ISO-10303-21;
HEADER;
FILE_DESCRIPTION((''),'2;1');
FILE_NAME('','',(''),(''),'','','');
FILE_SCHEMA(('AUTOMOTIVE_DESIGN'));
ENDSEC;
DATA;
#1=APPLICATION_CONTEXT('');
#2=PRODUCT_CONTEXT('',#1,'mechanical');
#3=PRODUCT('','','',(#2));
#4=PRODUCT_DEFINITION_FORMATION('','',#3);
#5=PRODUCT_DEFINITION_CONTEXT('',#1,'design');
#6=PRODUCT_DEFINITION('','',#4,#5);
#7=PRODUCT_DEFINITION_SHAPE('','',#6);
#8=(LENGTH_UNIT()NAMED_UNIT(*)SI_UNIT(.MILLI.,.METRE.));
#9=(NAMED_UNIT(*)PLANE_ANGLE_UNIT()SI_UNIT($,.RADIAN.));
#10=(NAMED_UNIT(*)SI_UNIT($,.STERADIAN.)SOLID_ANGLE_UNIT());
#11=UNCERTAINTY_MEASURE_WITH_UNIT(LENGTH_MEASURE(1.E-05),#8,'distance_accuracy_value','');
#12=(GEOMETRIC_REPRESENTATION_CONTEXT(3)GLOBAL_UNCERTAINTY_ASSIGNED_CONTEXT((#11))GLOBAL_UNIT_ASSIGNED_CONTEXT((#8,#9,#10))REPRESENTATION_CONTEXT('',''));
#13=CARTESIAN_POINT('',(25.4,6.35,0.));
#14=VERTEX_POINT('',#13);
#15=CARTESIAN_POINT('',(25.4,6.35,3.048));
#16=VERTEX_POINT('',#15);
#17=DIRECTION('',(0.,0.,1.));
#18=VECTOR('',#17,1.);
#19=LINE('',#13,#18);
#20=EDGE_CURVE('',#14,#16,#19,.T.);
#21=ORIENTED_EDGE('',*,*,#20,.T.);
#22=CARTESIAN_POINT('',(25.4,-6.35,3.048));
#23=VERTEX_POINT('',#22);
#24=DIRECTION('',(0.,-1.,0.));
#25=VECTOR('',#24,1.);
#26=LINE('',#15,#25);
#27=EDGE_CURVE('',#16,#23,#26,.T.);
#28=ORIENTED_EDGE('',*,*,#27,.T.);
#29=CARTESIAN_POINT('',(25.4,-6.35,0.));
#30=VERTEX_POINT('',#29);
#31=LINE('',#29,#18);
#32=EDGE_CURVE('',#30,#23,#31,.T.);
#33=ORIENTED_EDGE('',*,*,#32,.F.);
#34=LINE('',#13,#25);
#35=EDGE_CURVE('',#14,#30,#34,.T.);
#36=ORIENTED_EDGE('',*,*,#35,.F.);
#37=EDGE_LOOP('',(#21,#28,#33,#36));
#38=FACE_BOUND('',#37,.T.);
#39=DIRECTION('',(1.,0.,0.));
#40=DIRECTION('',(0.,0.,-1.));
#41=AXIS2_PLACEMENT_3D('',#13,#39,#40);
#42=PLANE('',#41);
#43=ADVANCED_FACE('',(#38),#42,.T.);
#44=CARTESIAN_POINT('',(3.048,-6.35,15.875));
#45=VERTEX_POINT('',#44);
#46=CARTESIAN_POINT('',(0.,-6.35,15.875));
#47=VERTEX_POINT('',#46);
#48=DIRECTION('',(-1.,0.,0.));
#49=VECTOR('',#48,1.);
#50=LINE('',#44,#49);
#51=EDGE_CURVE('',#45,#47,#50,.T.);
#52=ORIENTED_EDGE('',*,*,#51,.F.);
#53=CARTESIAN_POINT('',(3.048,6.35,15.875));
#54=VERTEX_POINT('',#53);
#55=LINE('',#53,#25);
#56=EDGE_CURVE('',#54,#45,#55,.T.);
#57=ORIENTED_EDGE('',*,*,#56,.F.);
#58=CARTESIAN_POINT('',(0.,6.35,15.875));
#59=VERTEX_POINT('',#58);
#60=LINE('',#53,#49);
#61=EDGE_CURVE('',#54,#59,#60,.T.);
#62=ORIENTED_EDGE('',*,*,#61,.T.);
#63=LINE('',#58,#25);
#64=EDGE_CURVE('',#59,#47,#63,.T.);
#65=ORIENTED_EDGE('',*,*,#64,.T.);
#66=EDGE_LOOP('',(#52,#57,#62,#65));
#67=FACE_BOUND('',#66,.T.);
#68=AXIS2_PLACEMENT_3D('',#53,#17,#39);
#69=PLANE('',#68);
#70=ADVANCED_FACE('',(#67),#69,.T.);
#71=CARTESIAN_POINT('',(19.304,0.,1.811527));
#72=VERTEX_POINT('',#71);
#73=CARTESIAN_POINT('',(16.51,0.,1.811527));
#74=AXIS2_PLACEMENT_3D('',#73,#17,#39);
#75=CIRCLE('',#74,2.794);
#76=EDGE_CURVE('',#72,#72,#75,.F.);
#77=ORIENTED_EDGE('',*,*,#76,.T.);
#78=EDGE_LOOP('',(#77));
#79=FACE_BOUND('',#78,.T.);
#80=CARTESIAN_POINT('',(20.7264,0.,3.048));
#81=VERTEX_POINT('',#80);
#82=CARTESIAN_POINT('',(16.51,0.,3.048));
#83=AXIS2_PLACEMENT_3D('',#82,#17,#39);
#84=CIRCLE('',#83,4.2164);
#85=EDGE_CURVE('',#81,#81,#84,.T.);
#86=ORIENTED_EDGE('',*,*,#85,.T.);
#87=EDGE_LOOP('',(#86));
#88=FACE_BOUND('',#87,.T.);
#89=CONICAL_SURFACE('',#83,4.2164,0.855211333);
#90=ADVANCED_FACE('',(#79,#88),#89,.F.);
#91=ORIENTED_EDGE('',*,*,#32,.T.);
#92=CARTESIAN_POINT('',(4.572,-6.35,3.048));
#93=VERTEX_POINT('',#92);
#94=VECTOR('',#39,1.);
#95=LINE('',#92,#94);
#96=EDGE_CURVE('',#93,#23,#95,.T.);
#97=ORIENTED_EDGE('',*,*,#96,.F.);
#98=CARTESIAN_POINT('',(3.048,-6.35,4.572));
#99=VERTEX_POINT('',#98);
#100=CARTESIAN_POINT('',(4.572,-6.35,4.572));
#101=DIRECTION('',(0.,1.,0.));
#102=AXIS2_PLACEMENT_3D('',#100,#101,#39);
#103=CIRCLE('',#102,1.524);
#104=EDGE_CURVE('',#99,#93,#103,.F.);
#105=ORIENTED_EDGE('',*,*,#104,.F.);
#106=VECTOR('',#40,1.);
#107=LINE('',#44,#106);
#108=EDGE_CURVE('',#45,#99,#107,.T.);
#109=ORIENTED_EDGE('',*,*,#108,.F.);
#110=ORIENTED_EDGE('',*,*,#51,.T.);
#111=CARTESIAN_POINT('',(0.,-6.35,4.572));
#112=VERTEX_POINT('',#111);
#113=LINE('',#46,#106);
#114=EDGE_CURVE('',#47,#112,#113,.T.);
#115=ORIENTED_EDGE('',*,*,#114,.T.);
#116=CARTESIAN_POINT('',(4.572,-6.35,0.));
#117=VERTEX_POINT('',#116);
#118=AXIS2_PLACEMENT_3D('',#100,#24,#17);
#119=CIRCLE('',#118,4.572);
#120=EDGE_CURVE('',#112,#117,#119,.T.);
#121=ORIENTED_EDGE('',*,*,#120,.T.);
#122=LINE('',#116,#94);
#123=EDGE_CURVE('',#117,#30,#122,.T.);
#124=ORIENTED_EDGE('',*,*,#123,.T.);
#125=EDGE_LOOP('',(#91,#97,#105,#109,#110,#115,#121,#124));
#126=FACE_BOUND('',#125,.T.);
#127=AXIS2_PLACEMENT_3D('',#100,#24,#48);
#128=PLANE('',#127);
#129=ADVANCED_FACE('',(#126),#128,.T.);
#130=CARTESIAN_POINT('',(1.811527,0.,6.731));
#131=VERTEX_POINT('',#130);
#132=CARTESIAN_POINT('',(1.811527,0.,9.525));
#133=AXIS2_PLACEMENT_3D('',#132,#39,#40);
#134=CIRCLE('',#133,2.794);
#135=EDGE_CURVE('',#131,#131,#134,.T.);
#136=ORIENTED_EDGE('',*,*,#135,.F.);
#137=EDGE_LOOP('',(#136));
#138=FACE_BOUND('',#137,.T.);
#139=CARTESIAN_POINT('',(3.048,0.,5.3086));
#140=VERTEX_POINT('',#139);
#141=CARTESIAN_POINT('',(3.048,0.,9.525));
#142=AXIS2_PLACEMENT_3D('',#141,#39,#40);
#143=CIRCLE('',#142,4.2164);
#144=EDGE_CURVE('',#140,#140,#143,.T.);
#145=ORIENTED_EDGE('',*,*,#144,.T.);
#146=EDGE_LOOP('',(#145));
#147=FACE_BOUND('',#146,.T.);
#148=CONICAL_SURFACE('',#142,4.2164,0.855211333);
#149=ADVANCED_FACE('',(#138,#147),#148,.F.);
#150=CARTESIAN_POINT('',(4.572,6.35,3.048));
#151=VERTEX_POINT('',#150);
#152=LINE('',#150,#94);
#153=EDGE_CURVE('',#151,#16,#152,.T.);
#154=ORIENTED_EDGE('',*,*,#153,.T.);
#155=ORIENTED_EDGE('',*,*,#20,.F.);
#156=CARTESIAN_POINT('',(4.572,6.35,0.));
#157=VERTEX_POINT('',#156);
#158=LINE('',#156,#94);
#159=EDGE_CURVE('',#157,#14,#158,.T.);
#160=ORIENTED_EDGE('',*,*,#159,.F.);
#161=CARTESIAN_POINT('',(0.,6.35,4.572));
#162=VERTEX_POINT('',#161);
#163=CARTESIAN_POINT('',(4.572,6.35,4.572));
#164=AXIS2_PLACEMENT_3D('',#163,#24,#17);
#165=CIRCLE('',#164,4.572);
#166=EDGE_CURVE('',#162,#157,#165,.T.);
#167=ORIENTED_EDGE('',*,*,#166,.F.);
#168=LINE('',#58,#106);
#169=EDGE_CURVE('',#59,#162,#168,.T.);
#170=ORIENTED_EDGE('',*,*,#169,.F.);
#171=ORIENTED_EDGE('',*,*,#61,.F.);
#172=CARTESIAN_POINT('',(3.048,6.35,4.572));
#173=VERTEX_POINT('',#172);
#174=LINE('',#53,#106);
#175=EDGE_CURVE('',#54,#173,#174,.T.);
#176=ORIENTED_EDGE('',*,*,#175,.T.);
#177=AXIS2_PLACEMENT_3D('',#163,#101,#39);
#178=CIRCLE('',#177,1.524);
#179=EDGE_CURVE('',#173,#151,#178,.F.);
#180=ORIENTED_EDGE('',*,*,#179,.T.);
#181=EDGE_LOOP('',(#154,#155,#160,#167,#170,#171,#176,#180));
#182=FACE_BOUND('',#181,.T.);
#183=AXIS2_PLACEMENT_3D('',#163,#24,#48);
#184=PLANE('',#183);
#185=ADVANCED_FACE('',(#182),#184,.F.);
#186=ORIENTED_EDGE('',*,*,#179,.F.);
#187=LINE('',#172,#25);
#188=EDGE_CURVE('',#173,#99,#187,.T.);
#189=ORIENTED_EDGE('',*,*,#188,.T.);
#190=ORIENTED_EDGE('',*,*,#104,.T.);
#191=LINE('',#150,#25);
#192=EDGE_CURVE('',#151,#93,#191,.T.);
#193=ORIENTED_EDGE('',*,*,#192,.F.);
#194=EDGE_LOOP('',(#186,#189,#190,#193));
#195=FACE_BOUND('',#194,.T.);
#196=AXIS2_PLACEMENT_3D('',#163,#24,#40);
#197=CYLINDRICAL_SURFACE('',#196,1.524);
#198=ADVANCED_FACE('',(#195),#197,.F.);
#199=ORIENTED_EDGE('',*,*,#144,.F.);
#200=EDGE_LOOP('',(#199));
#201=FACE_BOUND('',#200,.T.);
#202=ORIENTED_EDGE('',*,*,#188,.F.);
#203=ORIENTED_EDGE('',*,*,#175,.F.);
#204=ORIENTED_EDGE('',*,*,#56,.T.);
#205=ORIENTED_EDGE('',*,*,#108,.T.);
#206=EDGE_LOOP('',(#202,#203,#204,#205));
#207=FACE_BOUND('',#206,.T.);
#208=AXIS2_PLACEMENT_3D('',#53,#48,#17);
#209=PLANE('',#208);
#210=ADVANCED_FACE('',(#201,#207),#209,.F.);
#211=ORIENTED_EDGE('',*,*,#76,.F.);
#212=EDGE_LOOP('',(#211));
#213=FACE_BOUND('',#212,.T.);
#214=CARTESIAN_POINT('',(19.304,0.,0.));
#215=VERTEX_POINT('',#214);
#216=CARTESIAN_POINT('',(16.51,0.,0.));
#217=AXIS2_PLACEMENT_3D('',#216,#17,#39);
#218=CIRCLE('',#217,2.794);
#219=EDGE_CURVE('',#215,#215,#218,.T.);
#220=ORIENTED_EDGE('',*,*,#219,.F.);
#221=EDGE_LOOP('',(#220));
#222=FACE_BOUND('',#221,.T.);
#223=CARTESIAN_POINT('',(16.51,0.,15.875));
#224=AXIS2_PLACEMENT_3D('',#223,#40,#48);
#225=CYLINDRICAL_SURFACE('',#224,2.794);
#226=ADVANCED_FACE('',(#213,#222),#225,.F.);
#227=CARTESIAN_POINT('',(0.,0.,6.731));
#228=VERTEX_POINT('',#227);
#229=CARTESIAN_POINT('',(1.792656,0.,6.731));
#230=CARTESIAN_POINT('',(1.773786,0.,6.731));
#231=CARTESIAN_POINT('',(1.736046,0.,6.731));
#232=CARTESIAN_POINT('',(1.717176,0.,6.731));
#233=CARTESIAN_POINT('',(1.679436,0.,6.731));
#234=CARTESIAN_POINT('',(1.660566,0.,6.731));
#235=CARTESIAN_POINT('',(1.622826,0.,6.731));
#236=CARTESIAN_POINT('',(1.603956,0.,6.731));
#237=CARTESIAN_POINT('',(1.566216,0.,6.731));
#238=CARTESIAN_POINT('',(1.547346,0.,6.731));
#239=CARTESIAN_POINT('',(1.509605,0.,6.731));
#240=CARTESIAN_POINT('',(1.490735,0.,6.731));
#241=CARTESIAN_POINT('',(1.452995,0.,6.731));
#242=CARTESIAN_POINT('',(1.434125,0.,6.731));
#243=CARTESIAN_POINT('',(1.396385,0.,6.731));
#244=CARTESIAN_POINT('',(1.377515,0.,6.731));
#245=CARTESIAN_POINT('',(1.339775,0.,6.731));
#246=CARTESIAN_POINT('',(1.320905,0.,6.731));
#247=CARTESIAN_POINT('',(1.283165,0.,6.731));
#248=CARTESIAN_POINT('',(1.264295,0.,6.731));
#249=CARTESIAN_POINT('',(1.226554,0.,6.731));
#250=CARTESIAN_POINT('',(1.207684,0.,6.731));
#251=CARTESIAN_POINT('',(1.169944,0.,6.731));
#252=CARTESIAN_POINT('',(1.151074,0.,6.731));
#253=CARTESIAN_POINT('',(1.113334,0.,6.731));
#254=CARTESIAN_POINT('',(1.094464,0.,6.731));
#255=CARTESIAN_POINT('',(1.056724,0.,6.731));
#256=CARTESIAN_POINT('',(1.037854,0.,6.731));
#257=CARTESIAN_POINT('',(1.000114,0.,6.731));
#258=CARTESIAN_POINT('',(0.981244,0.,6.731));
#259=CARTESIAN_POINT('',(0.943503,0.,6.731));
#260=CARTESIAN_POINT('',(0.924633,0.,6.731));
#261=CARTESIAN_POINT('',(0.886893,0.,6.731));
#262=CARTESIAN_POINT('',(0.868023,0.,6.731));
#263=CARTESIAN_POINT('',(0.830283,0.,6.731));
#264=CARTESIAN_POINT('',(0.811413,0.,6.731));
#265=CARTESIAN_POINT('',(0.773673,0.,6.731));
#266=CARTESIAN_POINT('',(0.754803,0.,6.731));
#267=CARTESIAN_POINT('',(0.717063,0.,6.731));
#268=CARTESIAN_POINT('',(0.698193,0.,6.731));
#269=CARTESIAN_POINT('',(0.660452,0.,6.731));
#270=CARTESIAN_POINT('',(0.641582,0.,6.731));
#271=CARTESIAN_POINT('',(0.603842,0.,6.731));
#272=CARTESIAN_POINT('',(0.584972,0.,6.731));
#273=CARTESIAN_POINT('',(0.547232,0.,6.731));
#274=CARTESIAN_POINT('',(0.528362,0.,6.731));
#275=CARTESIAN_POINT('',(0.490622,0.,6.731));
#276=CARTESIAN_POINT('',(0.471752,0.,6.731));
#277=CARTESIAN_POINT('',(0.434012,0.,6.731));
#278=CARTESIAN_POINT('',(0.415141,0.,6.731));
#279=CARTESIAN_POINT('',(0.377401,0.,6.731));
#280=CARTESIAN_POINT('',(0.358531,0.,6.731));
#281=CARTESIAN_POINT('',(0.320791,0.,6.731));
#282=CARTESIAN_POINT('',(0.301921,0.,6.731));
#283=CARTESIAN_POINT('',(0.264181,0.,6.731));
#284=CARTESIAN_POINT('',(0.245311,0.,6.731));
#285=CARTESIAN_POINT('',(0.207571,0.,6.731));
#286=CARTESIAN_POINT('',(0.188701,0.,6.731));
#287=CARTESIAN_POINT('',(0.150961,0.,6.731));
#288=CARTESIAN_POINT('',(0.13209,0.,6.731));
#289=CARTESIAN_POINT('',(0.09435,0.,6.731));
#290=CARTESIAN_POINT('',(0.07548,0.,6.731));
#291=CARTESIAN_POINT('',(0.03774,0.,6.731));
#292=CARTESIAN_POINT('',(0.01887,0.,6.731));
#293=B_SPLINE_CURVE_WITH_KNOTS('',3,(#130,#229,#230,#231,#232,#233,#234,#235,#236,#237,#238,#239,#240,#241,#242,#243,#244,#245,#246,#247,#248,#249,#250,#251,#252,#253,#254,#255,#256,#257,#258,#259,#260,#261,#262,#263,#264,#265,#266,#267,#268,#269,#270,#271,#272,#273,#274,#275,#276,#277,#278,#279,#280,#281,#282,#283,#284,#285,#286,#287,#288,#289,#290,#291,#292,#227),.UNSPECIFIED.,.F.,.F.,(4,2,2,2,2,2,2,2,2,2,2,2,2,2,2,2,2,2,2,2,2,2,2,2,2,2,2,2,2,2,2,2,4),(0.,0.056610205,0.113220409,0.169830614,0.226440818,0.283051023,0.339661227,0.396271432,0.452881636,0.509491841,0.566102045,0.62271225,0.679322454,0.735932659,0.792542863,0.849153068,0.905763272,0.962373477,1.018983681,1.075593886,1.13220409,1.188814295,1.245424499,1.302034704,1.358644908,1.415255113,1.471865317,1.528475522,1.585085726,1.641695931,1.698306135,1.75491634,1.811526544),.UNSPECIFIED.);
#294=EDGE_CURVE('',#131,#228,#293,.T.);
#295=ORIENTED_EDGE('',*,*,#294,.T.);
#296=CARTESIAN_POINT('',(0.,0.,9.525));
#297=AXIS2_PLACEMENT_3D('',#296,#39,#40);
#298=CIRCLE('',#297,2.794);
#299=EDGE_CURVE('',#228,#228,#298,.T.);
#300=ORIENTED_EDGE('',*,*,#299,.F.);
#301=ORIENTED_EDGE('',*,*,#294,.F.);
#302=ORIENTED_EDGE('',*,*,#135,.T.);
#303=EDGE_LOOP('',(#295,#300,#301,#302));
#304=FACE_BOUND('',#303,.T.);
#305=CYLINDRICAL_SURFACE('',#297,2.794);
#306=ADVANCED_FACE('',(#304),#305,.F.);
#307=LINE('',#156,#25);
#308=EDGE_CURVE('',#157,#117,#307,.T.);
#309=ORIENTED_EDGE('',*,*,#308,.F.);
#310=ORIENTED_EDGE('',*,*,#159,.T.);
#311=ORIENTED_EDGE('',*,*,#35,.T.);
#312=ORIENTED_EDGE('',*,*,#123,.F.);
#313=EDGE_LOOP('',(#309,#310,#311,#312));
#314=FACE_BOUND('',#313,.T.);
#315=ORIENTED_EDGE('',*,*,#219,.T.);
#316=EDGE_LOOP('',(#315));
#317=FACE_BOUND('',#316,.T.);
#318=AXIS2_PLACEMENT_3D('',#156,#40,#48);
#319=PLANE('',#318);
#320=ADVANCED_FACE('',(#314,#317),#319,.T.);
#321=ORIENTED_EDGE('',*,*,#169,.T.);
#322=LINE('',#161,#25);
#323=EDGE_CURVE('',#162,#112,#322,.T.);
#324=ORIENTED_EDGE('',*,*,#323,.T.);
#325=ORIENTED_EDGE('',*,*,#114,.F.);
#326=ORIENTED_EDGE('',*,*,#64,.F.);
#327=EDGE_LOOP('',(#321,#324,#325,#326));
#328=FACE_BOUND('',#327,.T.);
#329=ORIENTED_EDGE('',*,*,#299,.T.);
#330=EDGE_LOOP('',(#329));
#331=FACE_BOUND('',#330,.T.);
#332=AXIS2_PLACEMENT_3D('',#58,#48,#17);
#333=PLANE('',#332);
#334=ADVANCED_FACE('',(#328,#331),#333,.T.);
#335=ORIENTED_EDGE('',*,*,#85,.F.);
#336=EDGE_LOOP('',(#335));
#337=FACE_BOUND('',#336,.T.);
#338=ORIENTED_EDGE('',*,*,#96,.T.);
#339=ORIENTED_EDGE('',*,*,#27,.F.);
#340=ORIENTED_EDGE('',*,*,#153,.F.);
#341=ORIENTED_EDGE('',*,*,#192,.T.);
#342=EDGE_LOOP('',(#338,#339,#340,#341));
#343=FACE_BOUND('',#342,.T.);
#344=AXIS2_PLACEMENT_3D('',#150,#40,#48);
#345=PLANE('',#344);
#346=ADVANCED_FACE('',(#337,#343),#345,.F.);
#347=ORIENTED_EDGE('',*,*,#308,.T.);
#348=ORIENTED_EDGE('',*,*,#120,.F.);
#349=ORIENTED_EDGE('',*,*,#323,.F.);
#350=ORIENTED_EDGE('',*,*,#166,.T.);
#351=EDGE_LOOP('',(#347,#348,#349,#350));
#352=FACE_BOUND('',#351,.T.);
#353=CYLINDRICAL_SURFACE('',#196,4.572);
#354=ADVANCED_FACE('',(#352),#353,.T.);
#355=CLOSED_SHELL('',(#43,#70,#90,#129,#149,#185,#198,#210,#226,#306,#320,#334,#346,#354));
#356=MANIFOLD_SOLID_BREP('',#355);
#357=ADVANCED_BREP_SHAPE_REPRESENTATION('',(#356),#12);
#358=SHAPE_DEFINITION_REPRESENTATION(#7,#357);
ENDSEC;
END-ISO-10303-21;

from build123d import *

# Parameters (mm, degrees)
EXTRUDE_THIN1_START = -6.35
EXTRUDE_THIN1_DEPTH = 12.7
SKETCH4_R           = 2.794
EXTRUDE3_DEPTH      = 29.141606724
SKETCH6_R           = 2.794
CUT_EXTRUDE1_DEPTH  = 31.618591166


# Read off the part's stored shape, not the designer's step: Extrude-Thin1
with BuildPart() as part:
    # Extrude-Thin1 outline → Extrude-Thin1 (new body)
    with BuildSketch(Plane(origin=(0, 0, 0), x_dir=(1, 0, 0), z_dir=(0, 1, 0)).offset(EXTRUDE_THIN1_START)):
        with BuildLine():
            Line((4.572, -3.048), (25.4, -3.048))
            Line((25.4, -3.048), (25.4, 0))
            Line((25.4, 0), (4.572, 0))
            ThreePointArc((4.572, 0), (1.339107796, -1.339107796), (0, -4.572))
            Line((0, -4.572), (0, -15.875))
            Line((0, -15.875), (3.048, -15.875))
            Line((3.048, -15.875), (3.048, -4.572))
            ThreePointArc((3.048, -4.572), (3.494369265, -3.494369265), (4.572, -3.048))
        make_face()
    extrude(amount=EXTRUDE_THIN1_DEPTH)

    # Sketch4 → Extrude3 (cut, through all)
    with BuildSketch(Plane(origin=(3.048, 0, 0), x_dir=(0, 0, -1), z_dir=(1, 0, 0))):
        with Locations((-9.525, 0)):
            Circle(SKETCH4_R)
    extrude(amount=-EXTRUDE3_DEPTH, mode=Mode.SUBTRACT)

    # Sketch6 → Cut-Extrude1 (cut, through all)
    with BuildSketch(Plane.XY):
        with Locations(Location((16.51, 0, 0), (0, 0, 180))):
            Circle(SKETCH6_R)
    extrude(amount=CUT_EXTRUDE1_DEPTH, mode=Mode.SUBTRACT)

    # Cut-Extrude2 cone 1 section (through the dimple's axis) → Cut-Extrude2 (revolve, cut)
    with BuildSketch(Plane(origin=(3.048, 0, 9.525), x_dir=(0, 0, -1), z_dir=(0, 1, 0))):
        Polygon((0, 0), (4.2164, 0), (0, 3.665260601), align=None)
    revolve(axis=Axis((3.048, 0, 9.525), (-1, 0, 0)), mode=Mode.SUBTRACT)

    # Cut-Extrude3 cone 1 section (through the dimple's axis) → Cut-Extrude3 (revolve, cut)
    with BuildSketch(Plane(origin=(16.51, 0, 3.048), x_dir=(0, -1, 0), z_dir=(1, 0, 0))):
        Polygon((0, 0), (4.2164, 0), (0, 3.665260601), align=None)
    revolve(axis=Axis((16.51, 0, 3.048), (0, 0, -1)), mode=Mode.SUBTRACT)


solid = part.part
